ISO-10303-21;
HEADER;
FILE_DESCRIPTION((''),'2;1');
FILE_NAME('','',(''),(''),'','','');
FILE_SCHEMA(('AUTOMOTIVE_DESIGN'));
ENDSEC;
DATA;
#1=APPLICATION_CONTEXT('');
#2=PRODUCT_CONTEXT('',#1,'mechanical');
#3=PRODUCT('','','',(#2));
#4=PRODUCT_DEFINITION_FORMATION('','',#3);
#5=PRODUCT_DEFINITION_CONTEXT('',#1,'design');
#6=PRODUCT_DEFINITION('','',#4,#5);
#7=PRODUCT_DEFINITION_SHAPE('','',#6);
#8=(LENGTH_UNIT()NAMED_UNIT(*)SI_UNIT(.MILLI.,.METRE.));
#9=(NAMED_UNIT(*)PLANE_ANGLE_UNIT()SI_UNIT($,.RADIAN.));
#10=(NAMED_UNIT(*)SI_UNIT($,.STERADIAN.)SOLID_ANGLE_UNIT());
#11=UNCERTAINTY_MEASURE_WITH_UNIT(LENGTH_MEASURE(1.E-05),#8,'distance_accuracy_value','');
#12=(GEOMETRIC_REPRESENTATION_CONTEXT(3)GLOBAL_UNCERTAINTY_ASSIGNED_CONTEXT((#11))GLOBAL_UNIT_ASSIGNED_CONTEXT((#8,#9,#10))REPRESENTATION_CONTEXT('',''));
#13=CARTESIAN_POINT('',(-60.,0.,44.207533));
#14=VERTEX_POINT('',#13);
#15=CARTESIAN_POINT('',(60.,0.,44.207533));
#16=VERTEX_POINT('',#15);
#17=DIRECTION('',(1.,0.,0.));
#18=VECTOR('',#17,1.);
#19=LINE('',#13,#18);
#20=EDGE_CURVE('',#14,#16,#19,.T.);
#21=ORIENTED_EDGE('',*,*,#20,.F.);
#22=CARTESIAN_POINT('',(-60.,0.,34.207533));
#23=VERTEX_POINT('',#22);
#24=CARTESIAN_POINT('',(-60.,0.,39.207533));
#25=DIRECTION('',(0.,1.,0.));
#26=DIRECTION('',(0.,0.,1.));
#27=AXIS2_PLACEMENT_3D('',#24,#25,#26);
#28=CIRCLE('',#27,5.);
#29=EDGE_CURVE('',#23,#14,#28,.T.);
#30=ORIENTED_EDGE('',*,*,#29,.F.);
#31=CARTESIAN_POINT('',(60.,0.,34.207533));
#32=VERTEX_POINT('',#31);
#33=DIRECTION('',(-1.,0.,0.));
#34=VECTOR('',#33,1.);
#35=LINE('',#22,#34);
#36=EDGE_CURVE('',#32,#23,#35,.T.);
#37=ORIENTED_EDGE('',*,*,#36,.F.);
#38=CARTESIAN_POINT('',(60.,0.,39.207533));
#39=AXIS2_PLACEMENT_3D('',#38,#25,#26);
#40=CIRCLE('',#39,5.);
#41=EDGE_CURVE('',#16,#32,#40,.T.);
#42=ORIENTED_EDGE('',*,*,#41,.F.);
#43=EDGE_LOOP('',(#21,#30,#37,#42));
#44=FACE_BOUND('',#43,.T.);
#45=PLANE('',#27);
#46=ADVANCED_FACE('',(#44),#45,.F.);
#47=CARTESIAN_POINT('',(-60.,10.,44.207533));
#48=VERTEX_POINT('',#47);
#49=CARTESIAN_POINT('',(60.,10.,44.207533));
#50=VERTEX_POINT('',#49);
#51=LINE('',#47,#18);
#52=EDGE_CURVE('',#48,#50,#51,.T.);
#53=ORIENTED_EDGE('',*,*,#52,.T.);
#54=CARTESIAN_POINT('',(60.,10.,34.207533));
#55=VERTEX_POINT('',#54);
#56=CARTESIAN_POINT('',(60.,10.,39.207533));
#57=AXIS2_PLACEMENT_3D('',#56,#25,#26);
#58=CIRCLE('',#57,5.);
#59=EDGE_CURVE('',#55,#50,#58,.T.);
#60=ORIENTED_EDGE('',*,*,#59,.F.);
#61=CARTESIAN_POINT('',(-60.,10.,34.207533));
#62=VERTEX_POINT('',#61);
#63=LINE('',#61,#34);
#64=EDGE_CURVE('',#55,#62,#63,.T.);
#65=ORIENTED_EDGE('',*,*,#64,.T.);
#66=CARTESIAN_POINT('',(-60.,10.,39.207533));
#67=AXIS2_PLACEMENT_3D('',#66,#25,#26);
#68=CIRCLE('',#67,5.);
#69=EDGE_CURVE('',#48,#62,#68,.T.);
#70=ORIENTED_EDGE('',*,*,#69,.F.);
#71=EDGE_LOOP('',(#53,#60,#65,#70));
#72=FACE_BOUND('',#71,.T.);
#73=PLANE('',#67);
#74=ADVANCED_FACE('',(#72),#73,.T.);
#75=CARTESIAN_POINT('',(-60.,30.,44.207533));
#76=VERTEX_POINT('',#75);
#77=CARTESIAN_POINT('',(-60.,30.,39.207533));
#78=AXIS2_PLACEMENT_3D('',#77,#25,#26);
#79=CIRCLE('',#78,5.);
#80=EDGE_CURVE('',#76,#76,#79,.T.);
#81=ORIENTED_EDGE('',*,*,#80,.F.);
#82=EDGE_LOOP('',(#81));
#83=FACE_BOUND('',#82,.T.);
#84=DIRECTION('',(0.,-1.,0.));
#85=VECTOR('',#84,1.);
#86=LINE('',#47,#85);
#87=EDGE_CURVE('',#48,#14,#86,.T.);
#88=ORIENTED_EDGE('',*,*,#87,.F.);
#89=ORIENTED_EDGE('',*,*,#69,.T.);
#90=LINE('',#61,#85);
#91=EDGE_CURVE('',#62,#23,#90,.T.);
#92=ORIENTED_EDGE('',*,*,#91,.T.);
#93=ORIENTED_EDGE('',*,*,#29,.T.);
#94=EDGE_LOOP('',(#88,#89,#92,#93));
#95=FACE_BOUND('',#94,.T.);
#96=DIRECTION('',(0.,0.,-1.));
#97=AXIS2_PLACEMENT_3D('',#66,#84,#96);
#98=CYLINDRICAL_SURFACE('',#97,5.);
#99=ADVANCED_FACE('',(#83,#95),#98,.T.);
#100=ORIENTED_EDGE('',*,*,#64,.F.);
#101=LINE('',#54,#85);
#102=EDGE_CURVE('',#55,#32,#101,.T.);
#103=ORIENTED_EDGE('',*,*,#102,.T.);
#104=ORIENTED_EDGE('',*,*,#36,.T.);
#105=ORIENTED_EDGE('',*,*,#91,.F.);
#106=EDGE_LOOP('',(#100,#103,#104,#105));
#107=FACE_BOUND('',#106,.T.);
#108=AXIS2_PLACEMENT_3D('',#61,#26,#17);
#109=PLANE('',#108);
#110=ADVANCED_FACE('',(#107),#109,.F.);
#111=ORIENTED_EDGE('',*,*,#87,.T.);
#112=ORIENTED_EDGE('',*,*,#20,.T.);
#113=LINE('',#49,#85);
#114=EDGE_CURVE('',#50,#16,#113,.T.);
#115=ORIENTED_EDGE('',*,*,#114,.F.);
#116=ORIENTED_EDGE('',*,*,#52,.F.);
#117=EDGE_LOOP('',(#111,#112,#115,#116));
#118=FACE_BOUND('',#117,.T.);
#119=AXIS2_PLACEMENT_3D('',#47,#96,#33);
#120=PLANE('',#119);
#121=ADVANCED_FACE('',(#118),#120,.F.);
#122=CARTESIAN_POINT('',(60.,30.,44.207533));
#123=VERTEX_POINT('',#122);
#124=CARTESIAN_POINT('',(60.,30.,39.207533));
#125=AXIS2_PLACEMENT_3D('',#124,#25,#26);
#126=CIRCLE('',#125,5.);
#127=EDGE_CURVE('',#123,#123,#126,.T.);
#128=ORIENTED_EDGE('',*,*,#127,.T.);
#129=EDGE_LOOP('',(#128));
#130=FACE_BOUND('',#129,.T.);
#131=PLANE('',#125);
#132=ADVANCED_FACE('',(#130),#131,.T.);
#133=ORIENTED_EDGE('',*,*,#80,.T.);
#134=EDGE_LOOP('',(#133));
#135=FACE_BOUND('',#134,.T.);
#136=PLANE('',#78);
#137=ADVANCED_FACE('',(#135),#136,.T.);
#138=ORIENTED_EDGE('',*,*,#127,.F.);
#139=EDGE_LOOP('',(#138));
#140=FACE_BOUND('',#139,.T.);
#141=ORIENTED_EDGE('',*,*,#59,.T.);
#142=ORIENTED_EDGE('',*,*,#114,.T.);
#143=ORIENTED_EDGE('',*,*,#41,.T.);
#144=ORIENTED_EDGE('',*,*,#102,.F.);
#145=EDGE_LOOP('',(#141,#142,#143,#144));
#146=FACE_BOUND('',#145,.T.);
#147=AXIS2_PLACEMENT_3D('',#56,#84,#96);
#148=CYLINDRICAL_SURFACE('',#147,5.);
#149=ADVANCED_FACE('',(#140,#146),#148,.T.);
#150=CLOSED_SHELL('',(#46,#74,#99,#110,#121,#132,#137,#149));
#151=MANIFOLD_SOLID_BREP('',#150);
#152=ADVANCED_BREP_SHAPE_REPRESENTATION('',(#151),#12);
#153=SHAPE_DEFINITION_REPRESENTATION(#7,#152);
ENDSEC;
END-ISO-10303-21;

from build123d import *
from build123d.topology import SkipClean

# Parameters (mm, degrees)
SALIENTE_EXTRUIR1_DEPTH = 10
CROQUIS2_R              = 5
SALIENTE_EXTRUIR2_DEPTH = 20


with BuildPart() as part:
    # Croquis1 → Saliente-Extruir1 (new body)
    with BuildSketch(Plane(origin=(0, 0, 0), x_dir=(1, 0, 0), z_dir=(0, 1, 0))):
        with BuildLine():
            Line((-60, -34.207532581), (60, -34.207532581))
            ThreePointArc((60, -34.207532581), (65, -39.207532581), (60, -44.207532581))
            Line((60, -44.207532581), (-60, -44.207532581))
            ThreePointArc((-60, -44.207532581), (-65, -39.207532581), (-60, -34.207532581))
        make_face()
    extrude(amount=SALIENTE_EXTRUIR1_DEPTH)

    # Croquis2 → Saliente-Extruir2 (add)
    with SkipClean():  # the faces are left unmerged after this step: merging them gives an invalid solid
        with BuildSketch(Plane(origin=(0, 10, 0), x_dir=(1, 0, 0), z_dir=(0, 1, 0))):
            with Locations((60, -39.207532581)):
                Circle(CROQUIS2_R)
            with Locations((-60, -39.207532581)):
                Circle(CROQUIS2_R)
        extrude(amount=SALIENTE_EXTRUIR2_DEPTH)


solid = part.part
